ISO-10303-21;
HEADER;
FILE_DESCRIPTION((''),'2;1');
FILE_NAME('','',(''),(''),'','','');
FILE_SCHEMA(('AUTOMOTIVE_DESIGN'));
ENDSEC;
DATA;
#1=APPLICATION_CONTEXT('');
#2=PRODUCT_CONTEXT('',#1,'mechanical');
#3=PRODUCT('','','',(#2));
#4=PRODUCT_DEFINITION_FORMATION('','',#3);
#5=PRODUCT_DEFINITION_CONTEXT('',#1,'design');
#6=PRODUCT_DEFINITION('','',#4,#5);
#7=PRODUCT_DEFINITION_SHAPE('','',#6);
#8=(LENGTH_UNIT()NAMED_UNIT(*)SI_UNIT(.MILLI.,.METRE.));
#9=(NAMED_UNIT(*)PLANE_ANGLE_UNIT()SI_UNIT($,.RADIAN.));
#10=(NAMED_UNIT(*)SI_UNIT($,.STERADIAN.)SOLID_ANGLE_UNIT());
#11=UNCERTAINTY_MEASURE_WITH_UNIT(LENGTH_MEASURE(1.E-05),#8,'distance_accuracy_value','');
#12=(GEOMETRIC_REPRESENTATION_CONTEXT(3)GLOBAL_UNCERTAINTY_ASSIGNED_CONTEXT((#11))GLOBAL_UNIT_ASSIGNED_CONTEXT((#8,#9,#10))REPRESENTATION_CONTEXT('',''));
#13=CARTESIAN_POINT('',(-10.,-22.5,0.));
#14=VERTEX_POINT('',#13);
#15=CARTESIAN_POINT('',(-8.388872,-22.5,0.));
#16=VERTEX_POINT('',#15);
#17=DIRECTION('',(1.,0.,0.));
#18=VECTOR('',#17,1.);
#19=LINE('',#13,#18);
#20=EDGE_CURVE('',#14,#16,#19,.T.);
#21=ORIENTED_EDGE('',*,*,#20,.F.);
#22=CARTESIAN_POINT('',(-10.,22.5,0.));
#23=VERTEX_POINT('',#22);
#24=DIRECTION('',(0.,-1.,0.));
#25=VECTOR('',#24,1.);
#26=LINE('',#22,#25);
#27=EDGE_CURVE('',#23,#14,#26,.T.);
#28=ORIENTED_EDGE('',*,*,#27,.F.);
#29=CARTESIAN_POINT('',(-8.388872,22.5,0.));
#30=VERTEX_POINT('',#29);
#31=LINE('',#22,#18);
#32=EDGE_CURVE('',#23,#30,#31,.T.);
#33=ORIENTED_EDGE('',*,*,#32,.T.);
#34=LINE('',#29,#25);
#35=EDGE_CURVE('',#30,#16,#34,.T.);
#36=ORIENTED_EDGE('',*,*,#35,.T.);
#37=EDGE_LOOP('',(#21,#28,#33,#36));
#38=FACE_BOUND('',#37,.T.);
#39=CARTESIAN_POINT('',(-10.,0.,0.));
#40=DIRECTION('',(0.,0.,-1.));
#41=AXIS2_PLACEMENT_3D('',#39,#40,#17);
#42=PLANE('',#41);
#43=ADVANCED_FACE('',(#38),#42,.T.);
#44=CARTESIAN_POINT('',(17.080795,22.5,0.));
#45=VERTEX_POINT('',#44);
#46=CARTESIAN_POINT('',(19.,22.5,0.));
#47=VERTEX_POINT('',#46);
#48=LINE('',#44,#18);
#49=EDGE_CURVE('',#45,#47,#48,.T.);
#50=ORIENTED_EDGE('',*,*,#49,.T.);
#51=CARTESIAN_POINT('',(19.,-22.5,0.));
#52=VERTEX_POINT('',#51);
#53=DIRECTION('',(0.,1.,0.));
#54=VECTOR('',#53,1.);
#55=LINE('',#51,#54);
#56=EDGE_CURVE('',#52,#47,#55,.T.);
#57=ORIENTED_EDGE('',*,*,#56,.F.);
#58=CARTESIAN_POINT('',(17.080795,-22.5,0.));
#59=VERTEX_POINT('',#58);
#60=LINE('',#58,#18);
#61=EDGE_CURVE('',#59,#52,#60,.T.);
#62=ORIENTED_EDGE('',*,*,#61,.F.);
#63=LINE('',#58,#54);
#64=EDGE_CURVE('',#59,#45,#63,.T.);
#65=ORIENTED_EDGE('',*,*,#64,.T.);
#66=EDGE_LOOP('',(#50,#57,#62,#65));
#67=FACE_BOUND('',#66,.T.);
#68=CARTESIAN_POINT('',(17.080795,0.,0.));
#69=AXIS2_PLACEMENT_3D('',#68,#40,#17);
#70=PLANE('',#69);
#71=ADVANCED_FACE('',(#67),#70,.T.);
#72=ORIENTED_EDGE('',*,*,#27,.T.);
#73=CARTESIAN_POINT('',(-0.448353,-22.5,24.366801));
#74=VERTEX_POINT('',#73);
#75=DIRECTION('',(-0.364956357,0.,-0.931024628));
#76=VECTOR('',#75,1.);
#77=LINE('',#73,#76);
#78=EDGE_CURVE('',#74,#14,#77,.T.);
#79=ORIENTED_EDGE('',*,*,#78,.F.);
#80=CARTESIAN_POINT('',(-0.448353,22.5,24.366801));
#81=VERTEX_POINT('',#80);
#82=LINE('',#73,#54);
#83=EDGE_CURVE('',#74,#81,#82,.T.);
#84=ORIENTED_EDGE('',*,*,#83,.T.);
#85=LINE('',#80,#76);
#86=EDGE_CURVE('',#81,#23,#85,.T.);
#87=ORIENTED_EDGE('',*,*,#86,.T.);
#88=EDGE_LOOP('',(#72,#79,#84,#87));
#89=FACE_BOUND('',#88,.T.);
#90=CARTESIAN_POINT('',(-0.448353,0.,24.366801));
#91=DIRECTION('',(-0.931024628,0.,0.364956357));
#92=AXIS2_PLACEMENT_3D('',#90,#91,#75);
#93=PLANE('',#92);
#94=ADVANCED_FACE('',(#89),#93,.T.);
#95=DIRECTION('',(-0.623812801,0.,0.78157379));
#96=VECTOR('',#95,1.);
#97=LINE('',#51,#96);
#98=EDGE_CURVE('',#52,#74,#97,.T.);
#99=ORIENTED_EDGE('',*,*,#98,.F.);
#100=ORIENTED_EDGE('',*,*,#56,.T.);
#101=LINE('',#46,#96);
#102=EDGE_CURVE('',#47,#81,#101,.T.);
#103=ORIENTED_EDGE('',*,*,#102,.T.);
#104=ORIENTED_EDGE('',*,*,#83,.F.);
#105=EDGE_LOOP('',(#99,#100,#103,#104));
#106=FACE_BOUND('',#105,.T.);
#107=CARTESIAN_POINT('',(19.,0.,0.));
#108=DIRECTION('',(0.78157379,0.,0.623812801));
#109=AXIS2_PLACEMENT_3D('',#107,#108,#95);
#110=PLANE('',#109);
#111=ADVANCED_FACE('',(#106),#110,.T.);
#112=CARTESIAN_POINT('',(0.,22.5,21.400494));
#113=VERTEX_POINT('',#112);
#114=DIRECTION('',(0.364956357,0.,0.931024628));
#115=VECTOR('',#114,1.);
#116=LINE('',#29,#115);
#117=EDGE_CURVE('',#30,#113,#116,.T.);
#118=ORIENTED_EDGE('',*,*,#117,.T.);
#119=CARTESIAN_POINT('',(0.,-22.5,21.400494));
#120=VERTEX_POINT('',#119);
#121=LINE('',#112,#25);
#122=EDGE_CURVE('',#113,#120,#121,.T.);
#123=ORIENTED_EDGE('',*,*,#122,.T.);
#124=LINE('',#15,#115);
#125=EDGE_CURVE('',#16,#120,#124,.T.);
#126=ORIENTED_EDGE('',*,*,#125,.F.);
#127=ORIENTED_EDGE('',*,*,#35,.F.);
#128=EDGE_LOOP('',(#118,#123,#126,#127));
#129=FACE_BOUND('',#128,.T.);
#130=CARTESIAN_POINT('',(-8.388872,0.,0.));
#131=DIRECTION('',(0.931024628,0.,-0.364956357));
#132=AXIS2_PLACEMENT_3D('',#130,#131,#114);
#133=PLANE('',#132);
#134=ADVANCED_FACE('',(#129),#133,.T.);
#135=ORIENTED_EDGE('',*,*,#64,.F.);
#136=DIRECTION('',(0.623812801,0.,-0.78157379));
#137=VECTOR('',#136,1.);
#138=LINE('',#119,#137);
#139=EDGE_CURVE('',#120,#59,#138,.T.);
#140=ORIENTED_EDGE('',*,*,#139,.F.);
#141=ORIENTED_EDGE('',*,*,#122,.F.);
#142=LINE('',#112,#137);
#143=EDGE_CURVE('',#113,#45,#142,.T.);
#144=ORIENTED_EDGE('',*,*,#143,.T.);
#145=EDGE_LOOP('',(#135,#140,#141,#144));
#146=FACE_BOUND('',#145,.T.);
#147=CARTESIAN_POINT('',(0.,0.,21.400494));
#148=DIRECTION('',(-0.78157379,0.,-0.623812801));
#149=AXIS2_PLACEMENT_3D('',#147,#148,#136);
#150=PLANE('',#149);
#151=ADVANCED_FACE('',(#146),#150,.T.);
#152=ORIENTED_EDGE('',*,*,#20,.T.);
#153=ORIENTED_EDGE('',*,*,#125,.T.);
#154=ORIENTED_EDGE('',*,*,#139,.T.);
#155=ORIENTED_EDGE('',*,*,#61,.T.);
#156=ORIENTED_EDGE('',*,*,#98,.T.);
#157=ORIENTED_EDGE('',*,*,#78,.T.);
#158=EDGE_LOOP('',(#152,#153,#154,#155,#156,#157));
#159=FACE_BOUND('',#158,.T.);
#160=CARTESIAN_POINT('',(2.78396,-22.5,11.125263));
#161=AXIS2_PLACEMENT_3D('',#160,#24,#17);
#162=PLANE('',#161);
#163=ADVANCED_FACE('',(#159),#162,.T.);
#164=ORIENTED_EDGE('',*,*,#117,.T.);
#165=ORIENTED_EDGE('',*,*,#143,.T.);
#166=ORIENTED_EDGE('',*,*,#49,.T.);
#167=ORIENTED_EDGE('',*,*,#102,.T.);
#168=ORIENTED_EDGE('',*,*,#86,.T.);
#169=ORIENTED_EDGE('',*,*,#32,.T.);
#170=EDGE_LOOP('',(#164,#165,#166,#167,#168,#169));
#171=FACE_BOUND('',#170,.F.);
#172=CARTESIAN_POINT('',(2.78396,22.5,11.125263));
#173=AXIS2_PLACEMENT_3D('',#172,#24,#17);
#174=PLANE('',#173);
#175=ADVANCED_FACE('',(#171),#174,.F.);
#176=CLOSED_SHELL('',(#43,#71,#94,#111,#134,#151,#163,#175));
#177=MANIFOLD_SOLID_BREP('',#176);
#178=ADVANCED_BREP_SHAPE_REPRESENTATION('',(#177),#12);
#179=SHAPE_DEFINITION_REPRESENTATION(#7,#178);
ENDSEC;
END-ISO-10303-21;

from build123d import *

# Parameters (mm, degrees)
F1_DEPTH = 22.5


# Not quite as in the source:
# - a feature of the source that left no trace in its solid (it failed there, or was rolled back) is left out


with BuildPart() as f1:
    # F0 (on Front) → F1 (new body, symmetric)
    with BuildSketch(Plane.XZ):
        Polygon((-0.4483525125, 24.3668013383), (-10, 0), (-8.3888718351, 0), (0, 21.4004938652), (17.0807954173, 0), (19, 0), align=None)
    extrude(amount=F1_DEPTH, both=True)


solid = f1.part
